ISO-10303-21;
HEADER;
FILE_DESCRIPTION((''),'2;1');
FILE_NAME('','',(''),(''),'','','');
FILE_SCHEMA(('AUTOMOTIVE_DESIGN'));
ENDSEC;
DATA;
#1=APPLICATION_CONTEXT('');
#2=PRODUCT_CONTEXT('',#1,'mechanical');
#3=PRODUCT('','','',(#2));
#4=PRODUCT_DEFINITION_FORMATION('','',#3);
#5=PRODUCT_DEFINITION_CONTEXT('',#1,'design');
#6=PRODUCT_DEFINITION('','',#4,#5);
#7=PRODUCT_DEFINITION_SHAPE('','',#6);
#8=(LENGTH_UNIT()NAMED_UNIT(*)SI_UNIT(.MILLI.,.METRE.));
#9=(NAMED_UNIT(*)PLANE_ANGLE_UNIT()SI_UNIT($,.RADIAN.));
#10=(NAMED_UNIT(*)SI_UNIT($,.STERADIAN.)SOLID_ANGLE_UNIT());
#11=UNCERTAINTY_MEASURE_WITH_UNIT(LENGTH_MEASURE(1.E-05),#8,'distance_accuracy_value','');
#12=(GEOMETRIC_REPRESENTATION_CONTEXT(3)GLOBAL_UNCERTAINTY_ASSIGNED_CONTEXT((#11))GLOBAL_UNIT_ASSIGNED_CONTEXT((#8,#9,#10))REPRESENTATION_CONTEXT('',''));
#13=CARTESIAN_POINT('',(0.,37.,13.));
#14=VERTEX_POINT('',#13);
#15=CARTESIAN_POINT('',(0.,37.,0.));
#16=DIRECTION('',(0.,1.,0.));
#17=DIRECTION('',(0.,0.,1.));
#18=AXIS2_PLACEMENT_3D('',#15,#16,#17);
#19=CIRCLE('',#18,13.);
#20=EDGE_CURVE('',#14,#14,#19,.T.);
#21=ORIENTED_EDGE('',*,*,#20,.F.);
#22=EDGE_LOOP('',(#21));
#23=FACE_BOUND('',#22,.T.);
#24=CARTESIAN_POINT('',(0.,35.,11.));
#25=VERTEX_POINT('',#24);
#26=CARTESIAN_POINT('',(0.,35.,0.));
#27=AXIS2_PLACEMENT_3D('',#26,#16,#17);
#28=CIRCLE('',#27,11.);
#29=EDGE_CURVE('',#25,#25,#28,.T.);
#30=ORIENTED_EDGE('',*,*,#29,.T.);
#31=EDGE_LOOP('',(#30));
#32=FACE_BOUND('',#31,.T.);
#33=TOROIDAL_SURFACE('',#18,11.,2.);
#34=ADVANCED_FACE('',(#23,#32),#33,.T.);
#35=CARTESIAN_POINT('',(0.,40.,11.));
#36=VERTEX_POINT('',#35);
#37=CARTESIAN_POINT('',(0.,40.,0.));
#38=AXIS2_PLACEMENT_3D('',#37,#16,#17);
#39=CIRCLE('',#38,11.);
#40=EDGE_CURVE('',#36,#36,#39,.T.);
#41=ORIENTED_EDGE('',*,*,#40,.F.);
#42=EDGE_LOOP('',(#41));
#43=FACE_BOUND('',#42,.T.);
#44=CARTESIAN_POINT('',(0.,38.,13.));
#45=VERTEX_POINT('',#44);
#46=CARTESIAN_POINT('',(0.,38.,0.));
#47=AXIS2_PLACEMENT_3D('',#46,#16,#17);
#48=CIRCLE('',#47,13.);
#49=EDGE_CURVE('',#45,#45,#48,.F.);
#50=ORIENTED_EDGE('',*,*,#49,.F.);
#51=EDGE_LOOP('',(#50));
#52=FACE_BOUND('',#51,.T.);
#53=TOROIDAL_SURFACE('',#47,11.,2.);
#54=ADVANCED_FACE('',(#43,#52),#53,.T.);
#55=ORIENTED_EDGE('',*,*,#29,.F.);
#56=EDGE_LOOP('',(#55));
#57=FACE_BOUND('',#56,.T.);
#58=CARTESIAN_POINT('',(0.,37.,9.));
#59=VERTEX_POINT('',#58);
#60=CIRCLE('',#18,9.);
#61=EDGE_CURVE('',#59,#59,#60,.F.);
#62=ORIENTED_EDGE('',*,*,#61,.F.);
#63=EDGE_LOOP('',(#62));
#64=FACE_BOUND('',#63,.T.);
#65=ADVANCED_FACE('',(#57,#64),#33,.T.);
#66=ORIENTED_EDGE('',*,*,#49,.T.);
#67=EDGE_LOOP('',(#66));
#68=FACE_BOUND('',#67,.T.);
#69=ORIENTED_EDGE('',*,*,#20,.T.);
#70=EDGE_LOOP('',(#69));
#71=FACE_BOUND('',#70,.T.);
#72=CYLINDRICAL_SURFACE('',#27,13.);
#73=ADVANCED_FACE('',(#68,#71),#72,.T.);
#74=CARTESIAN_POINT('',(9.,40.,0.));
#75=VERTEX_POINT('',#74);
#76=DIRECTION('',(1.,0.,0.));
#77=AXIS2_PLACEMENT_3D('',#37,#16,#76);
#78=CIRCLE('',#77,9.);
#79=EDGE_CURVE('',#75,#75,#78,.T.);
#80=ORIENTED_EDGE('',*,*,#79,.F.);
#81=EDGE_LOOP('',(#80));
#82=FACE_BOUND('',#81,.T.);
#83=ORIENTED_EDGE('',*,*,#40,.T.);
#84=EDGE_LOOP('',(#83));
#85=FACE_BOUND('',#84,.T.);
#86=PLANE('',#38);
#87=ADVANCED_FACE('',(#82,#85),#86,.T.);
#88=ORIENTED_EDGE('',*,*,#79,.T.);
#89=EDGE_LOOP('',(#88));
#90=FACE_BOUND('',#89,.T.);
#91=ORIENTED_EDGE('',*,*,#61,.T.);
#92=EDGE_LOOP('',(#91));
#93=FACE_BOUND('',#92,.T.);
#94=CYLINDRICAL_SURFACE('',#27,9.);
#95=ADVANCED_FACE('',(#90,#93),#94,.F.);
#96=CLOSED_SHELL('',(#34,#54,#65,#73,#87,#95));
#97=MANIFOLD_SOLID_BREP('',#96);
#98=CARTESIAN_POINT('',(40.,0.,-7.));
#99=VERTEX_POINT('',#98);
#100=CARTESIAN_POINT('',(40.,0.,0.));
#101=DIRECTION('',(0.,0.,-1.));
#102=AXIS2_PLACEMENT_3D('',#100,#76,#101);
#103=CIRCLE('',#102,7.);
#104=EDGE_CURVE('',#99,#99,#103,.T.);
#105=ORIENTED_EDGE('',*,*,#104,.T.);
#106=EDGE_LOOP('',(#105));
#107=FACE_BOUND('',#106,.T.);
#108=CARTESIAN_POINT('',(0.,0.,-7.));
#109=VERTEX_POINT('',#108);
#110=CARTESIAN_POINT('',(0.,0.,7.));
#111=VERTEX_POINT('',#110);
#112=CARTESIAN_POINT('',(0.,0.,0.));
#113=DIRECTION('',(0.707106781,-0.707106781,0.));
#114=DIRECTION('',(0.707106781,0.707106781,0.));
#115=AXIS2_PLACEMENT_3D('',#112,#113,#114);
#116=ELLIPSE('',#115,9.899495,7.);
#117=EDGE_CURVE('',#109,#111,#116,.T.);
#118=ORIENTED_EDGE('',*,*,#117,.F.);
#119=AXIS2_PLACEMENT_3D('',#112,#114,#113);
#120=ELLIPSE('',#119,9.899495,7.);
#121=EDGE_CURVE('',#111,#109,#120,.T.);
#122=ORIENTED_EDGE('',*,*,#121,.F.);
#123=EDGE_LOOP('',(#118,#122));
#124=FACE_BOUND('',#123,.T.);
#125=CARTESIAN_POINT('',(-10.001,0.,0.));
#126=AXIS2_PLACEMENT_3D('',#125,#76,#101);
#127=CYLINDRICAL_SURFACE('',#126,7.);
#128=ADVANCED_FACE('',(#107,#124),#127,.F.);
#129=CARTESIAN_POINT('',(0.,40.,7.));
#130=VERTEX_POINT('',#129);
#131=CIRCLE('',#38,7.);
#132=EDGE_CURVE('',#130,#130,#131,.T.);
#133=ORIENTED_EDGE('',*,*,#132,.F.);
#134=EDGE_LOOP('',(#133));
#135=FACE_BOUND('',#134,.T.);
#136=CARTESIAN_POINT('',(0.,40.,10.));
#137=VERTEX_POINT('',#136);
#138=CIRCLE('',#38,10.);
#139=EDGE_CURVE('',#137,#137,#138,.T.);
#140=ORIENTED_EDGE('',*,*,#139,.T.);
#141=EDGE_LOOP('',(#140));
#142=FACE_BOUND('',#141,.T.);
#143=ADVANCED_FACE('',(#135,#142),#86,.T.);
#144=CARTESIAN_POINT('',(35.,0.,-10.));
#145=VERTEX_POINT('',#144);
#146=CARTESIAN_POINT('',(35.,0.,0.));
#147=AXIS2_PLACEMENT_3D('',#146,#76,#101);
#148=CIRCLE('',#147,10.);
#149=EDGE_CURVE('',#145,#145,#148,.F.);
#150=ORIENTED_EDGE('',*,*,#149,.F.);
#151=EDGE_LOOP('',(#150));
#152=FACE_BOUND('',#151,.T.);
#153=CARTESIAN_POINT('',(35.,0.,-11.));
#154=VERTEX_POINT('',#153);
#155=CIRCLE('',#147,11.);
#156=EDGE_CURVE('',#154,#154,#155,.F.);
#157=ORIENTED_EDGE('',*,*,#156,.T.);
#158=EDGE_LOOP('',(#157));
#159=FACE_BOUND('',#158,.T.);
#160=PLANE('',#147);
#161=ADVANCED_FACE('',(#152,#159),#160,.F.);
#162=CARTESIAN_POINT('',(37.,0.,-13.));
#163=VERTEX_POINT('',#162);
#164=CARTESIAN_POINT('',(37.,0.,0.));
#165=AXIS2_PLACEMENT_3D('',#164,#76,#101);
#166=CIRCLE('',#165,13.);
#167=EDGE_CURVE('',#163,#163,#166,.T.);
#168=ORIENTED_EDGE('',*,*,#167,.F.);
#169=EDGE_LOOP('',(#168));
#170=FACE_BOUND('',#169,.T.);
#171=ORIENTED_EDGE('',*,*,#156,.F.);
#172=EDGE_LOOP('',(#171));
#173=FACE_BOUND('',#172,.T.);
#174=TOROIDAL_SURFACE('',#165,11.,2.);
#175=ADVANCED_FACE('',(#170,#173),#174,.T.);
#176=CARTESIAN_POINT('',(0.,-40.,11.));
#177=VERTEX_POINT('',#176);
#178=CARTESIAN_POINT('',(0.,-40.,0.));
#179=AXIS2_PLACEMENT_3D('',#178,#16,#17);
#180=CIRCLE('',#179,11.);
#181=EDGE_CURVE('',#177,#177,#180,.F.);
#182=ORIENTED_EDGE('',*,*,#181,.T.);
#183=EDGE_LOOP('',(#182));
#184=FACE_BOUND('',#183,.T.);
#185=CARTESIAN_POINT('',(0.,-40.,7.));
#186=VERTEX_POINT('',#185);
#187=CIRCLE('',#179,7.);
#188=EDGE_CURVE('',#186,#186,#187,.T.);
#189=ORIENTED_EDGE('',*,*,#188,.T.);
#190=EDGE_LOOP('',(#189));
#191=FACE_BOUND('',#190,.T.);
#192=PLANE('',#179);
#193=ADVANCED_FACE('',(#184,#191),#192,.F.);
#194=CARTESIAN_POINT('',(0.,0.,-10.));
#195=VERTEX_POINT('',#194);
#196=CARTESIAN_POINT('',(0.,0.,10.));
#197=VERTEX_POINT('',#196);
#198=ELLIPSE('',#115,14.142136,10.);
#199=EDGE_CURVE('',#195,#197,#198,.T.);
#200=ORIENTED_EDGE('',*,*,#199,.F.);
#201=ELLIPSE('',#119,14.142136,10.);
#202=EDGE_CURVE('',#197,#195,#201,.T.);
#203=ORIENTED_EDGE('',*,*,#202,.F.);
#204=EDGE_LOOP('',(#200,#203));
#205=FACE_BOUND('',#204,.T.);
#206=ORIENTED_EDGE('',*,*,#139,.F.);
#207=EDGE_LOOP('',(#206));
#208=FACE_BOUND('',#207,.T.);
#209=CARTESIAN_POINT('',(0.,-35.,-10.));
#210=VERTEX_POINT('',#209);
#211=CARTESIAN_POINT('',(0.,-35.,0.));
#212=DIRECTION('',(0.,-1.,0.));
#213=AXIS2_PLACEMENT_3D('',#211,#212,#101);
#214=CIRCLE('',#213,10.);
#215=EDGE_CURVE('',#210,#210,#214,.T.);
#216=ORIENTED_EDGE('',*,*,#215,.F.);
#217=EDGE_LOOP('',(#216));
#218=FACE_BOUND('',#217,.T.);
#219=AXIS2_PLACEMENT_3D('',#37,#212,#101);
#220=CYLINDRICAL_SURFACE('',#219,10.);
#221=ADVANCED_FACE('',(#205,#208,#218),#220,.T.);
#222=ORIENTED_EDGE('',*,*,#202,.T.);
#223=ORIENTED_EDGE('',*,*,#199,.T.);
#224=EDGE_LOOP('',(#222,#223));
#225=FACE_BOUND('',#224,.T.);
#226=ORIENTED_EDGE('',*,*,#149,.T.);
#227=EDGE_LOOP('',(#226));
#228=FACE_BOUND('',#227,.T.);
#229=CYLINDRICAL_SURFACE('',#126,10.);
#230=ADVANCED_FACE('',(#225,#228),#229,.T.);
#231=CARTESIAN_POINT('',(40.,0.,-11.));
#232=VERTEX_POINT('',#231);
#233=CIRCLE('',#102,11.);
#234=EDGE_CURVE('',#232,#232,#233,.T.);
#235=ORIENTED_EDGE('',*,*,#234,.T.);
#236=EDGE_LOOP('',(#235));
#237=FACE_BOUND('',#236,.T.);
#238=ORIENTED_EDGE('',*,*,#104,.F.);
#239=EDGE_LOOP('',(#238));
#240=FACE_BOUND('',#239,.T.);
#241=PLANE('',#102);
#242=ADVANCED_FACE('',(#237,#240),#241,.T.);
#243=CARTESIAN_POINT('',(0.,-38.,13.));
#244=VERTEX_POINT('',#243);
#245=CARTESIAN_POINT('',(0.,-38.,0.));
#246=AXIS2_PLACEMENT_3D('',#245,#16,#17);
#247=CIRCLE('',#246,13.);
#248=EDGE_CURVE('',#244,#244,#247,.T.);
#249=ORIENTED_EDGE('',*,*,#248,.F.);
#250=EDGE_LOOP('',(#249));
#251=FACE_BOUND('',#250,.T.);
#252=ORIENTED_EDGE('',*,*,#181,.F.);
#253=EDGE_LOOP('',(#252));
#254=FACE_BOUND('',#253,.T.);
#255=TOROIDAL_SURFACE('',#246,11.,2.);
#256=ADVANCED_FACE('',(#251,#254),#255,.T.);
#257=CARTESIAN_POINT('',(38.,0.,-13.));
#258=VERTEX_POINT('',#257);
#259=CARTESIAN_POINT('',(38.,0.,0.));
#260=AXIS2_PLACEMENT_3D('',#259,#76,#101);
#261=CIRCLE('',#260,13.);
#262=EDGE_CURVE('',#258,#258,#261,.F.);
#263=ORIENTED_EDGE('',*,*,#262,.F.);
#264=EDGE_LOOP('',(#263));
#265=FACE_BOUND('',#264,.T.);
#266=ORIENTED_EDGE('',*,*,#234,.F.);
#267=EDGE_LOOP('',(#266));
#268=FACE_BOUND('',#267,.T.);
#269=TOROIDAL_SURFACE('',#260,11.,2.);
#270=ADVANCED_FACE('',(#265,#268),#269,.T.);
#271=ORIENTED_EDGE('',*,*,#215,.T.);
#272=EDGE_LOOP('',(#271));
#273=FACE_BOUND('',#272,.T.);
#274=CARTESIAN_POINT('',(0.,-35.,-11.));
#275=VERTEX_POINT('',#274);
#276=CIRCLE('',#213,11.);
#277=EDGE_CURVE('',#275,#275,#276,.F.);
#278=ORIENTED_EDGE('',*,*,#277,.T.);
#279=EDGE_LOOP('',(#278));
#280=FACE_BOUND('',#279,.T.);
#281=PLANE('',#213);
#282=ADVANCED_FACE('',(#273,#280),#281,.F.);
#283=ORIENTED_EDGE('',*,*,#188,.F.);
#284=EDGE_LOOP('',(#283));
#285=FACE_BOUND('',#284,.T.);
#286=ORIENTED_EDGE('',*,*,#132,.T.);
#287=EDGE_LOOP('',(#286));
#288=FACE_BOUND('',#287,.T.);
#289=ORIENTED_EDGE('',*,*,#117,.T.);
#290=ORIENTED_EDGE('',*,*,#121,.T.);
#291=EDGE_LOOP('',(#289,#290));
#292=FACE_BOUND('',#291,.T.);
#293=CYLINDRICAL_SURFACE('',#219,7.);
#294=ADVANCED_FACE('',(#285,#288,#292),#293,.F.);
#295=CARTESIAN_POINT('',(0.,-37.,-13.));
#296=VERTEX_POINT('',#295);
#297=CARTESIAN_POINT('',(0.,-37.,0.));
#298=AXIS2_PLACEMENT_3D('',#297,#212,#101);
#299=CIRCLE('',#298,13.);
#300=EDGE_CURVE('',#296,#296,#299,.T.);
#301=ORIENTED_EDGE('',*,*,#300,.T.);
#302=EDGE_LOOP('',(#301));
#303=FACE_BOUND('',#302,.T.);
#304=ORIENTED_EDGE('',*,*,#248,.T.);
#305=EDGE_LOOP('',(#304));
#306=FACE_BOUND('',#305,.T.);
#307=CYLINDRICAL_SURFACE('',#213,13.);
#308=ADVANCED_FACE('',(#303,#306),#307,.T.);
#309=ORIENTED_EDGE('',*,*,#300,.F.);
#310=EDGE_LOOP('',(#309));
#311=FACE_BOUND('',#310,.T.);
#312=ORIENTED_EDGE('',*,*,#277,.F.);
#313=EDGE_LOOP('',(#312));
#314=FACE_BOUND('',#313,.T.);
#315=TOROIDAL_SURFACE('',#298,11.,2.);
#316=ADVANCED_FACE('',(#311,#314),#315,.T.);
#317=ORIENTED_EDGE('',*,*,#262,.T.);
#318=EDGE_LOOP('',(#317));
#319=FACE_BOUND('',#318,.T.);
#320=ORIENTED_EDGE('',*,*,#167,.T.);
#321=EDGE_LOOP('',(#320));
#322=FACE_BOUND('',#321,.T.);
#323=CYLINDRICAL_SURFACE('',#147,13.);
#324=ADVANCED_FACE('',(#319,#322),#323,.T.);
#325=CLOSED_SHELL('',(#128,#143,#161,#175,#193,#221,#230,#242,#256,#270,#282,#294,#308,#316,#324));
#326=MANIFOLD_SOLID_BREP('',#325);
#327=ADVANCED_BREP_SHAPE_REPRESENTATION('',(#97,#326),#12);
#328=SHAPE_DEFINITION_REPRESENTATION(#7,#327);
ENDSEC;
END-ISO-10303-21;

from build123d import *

# Parameters (mm, degrees)
SKETCH_1_R               = 10
EXTRUDE_1_DEPTH          = 40
SHELL_1_T                = -3
EXTRUDE_2_REACH          = 66.807
EXTRUDE_2_END_RADIUS     = 10
SKETCH_2_R               = 10
CUT_EXTRUDE_1_REACH      = 66.807
CUT_EXTRUDE_1_END_RADIUS = 7
SKETCH_3_R               = 7
SKETCH_5_R               = 13
SKETCH_5_R_2             = 9
EXTRUDE_2_2_DEPTH        = 5
SKETCH_6_R               = 13
SKETCH_6_R_2             = 9
EXTRUDE_3_DEPTH          = 5
SKETCH_7_R               = 13
SKETCH_7_R_2             = 9
EXTRUDE_4_DEPTH          = 5
FILLET_1_R               = 2
FILLET_2_R               = 2


with BuildPart() as part:
    # 草图1 → 凸台-拉伸1 (new, symmetric)
    with BuildSketch(Plane(origin=(0, 0, 0), x_dir=(1, 0, 0), z_dir=(0, 1, 0))):
        with Locations(Location((0, 0, 0), (0, 0, 270))):
            Circle(SKETCH_1_R)
    extrude(amount=EXTRUDE_1_DEPTH, both=True)

    # 抽壳1
    shell_1_openings = [part.faces().sort_by_distance(p)[0] for p in [
        (0, 40, 0),
        (0, -40, 0),
    ]]
    offset(amount=SHELL_1_T, openings=shell_1_openings, kind=Kind.INTERSECTION)

    # Extrude 2: up to this cylinder (the profile starts outside it)
    extrude_2_end = Plane(origin=(0, 0, 0), z_dir=(0, -1, 0)) * Cylinder(EXTRUDE_2_END_RADIUS, 154.614, mode=Mode.PRIVATE)
    # 草图2 → Extrude 2 (add, up to the surface)
    with BuildSketch(Plane(origin=(40, 0, 0), x_dir=(0, 0, -1), z_dir=(1, 0, 0)), mode=Mode.PRIVATE) as extrude_2_sk1:
        Circle(SKETCH_2_R)
    extrude_2_tool1 = extrude(extrude_2_sk1.sketch, amount=-EXTRUDE_2_REACH, mode=Mode.PRIVATE) - extrude_2_end
    add(extrude_2_tool1.solids().sort_by_distance((40, 0, 0))[0])

    # 切除-拉伸1: up to this cylinder (the profile starts outside it)
    cut_extrude_1_end = Plane(origin=(0, 0, 0), z_dir=(0, -1, 0)) * Cylinder(CUT_EXTRUDE_1_END_RADIUS, 148.614, mode=Mode.PRIVATE)
    # 草图3 → 切除-拉伸1 (cut, up to the surface)
    with BuildSketch(Plane(origin=(40, 0, 0), x_dir=(0, 0, -1), z_dir=(1, 0, 0)), mode=Mode.PRIVATE) as cut_extrude_1_sk1:
        Circle(SKETCH_3_R)
    cut_extrude_1_tool1 = extrude(cut_extrude_1_sk1.sketch, amount=-CUT_EXTRUDE_1_REACH, mode=Mode.PRIVATE) - cut_extrude_1_end
    add(cut_extrude_1_tool1.solids().sort_by_distance((40, 0, 0))[0], mode=Mode.SUBTRACT)

    # 草图6 → 拉伸-薄壁3 (add)
    with BuildSketch(Plane(origin=(40, 0, 0), x_dir=(0, 0, -1), z_dir=(1, 0, 0))):
        Circle(SKETCH_6_R)
        Circle(SKETCH_6_R_2, mode=Mode.SUBTRACT)
    extrude(amount=-EXTRUDE_3_DEPTH)

    # 草图7 → 拉伸-薄壁4 (add)
    with BuildSketch(Plane.XZ.offset(40)):
        Circle(SKETCH_7_R)
        Circle(SKETCH_7_R_2, mode=Mode.SUBTRACT)
    extrude(amount=-EXTRUDE_4_DEPTH)

    # 圆角1
    fillet_1_edges = [part.edges().sort_by_distance(p)[0] for p in [
        (35, 0, 13),
        (40, 0, 13),
        (-13, -35, 0),
        (-13, -40, 0),
    ]]
    fillet(fillet_1_edges, radius=FILLET_1_R)


with BuildPart() as body_2:
    # 草图5 → Extrude 2 2 (new body)
    with BuildSketch(Plane(origin=(0, 40, 0), x_dir=(1, 0, 0), z_dir=(0, 1, 0))):
        Circle(SKETCH_5_R)
        Circle(SKETCH_5_R_2, mode=Mode.SUBTRACT)
    extrude(amount=-EXTRUDE_2_2_DEPTH)

    # 圆角2
    fillet_2_edges = [body_2.edges().sort_by_distance(p)[0] for p in [
        (-13, 40, 0),
        (-13, 35, 0),
        (-9, 35, 0),
    ]]
    fillet(fillet_2_edges, radius=FILLET_2_R - 0.0001)  # a hair under: the kernel refuses the full size


solid = Compound([part.part, body_2.part])
